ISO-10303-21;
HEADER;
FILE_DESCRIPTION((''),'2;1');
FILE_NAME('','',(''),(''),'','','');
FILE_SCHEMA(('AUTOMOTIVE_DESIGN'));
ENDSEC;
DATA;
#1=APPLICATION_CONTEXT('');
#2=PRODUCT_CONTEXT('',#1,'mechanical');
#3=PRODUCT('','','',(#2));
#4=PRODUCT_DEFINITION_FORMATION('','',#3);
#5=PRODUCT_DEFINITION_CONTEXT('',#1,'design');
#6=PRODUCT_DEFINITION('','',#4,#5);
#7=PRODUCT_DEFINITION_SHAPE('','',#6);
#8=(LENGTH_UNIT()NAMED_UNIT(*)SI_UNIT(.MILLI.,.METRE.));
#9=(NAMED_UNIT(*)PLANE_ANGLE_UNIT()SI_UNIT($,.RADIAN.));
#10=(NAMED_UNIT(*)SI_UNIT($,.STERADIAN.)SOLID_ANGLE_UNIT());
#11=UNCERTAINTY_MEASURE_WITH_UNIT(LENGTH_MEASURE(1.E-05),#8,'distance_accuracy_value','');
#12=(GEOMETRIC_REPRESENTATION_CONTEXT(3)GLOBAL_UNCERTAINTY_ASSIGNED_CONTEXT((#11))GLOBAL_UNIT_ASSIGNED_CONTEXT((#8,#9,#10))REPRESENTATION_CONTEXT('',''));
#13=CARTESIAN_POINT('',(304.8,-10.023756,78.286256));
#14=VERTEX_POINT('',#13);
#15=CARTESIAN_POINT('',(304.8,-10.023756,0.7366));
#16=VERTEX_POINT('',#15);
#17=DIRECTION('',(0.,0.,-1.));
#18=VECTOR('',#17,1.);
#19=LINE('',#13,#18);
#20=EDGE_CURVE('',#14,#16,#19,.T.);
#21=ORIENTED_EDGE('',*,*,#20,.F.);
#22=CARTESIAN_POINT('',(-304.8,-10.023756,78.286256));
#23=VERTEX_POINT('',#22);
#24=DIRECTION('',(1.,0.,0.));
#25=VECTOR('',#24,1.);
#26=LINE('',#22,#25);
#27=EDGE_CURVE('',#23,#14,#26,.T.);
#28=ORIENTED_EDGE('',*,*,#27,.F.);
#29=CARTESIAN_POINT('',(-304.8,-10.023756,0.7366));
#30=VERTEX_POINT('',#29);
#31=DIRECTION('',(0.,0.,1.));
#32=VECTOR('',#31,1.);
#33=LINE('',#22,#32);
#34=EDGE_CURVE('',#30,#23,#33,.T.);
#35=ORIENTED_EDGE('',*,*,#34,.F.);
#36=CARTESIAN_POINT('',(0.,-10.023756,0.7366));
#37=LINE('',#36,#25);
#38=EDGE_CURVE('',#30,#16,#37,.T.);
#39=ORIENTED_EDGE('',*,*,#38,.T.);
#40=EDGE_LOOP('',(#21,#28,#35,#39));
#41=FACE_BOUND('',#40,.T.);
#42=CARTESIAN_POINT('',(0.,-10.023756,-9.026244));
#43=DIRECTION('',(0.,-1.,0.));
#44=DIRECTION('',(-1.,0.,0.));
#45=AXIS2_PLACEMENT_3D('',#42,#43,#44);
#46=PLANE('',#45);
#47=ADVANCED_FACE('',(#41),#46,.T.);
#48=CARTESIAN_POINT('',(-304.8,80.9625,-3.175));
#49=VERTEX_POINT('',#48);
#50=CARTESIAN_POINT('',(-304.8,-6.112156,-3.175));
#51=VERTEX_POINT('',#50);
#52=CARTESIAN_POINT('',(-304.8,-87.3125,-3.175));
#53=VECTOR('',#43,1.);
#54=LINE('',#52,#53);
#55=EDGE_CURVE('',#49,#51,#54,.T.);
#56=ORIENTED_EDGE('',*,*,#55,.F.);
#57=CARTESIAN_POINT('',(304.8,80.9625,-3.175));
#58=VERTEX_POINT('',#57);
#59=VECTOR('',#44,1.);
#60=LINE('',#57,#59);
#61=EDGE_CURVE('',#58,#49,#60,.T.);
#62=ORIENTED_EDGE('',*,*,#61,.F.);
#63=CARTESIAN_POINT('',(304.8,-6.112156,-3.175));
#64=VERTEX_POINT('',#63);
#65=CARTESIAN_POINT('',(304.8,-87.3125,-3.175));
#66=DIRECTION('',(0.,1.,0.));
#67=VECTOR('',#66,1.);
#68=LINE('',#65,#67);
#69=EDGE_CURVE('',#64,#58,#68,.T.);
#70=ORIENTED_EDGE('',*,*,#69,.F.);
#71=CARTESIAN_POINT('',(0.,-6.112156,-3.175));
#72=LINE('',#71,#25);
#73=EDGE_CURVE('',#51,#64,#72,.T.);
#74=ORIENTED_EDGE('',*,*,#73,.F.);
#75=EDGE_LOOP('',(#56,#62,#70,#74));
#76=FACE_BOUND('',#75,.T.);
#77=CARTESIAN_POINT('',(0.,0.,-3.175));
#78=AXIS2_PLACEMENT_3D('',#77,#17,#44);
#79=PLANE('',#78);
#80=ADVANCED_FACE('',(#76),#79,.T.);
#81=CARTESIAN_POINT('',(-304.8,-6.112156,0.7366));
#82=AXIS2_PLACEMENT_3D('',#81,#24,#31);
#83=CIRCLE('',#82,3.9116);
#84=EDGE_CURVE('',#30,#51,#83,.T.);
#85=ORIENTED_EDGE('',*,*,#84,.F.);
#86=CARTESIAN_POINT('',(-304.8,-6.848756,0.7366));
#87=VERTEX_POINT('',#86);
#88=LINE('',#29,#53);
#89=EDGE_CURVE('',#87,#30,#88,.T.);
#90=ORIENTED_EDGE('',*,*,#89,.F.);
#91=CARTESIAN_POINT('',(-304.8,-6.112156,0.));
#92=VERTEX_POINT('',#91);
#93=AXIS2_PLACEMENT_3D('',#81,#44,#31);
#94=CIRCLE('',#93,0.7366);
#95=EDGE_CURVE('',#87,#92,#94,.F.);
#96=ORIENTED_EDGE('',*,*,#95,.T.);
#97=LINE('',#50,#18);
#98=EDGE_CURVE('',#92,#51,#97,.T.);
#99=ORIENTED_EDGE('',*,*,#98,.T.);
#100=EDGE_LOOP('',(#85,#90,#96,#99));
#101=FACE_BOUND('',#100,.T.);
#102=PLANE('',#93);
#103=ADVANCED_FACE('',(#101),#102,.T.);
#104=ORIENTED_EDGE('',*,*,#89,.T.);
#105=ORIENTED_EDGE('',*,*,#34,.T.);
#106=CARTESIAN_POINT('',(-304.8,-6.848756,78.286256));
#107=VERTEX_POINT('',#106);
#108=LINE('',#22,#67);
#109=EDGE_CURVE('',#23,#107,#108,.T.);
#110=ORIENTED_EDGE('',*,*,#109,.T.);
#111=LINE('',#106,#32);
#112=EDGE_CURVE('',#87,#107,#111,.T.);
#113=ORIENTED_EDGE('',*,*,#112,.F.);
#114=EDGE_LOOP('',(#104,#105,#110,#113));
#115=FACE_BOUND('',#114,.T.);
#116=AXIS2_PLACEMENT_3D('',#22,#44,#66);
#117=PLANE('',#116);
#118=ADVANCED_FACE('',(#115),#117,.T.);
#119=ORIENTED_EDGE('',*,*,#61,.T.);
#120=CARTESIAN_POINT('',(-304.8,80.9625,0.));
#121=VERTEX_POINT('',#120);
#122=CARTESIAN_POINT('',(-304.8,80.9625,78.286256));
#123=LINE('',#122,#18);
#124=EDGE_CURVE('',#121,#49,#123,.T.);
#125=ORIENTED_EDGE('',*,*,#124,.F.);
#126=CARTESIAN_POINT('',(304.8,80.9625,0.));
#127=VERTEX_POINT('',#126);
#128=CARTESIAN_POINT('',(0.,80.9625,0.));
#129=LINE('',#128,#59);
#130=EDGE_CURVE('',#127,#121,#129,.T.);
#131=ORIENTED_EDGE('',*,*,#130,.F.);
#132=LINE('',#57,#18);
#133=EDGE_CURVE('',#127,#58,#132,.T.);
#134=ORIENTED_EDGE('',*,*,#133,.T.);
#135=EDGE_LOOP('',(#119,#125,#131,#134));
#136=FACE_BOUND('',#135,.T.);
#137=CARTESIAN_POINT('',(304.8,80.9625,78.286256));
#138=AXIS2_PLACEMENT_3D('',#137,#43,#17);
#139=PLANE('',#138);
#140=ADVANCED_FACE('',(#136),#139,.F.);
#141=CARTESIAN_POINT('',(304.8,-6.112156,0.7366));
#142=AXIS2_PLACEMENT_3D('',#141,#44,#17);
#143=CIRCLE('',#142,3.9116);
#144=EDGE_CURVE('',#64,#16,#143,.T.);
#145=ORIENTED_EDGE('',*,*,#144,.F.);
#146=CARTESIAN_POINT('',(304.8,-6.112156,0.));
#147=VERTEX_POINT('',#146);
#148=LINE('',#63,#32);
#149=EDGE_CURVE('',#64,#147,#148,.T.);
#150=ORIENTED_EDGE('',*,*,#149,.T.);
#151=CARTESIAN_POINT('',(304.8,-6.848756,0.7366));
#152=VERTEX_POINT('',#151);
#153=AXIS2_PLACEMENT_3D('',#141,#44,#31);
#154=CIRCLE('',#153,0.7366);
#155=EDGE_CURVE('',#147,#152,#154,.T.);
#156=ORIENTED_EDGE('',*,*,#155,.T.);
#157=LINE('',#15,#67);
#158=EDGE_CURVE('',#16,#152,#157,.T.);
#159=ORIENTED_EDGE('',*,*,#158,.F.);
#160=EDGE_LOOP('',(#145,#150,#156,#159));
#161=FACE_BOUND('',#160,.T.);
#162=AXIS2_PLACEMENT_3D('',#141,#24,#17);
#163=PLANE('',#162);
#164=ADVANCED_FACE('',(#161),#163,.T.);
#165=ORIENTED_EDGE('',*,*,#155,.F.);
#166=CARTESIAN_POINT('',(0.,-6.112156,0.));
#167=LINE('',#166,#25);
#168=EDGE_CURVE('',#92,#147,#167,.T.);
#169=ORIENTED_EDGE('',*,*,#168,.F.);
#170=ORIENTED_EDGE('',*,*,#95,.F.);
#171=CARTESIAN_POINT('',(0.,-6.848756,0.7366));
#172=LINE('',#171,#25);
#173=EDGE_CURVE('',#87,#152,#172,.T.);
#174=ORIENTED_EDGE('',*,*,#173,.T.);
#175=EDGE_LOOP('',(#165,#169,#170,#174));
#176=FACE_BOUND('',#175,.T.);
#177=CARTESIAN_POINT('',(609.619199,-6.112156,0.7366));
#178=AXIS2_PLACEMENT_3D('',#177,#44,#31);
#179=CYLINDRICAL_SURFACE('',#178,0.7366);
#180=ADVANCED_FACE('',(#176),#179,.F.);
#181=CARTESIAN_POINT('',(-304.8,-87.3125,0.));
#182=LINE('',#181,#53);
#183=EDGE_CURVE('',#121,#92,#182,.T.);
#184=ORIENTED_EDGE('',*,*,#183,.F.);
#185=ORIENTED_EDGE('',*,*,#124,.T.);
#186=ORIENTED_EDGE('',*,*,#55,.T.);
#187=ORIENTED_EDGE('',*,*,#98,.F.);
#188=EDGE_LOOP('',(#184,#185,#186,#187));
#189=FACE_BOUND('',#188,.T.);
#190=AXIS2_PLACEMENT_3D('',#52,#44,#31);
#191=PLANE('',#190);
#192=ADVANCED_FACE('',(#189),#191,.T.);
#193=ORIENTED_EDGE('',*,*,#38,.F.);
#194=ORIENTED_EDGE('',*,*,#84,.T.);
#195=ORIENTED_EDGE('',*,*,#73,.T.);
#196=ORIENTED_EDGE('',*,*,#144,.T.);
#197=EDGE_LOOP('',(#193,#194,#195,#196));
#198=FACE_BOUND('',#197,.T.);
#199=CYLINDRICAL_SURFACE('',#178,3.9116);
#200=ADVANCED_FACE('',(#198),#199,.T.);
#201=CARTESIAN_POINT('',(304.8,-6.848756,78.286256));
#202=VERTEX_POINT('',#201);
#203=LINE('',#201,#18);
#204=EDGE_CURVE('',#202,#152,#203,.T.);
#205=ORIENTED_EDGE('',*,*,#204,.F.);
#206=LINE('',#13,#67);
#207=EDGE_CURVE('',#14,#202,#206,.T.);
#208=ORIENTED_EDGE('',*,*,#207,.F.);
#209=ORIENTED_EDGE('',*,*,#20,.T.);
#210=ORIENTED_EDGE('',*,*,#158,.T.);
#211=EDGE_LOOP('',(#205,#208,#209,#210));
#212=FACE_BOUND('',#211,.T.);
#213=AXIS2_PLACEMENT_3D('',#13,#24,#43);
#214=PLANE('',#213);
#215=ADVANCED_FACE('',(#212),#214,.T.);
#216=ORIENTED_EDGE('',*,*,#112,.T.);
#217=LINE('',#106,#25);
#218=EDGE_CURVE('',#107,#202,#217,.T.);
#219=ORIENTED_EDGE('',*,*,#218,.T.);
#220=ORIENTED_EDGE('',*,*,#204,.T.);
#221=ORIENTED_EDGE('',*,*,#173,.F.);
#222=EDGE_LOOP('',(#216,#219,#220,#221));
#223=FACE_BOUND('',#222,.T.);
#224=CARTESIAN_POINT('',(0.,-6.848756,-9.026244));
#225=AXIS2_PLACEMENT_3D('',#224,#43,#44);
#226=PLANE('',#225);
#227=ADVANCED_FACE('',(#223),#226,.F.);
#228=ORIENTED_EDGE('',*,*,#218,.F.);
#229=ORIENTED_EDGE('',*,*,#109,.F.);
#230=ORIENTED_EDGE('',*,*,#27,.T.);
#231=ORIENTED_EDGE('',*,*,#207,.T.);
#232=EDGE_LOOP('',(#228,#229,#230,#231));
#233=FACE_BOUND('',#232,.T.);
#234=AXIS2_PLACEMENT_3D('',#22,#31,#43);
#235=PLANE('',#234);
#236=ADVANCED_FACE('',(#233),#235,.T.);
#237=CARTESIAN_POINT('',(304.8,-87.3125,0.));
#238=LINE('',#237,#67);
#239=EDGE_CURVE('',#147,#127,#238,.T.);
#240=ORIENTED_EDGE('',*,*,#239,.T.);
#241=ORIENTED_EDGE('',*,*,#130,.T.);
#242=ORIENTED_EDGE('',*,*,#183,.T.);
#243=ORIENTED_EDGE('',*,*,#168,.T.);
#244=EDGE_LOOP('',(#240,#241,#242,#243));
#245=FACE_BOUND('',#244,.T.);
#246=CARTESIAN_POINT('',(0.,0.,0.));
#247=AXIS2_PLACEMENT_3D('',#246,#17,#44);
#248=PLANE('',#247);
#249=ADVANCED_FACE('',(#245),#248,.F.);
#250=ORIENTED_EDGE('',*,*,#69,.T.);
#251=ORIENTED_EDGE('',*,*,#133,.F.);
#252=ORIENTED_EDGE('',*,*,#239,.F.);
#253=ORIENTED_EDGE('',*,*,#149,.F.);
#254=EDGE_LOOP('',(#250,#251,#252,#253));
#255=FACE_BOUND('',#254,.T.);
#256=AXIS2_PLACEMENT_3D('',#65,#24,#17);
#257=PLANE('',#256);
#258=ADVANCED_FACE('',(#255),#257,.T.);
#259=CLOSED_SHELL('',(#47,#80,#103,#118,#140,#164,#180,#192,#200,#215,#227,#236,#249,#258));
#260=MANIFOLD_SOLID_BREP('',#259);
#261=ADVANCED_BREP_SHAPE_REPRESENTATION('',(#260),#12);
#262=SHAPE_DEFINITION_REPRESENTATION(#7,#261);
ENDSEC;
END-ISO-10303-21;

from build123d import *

# Parameters (mm, degrees)
SKETCH8_W              = 609.6
SKETCH8_H              = 174.625
BASE_FLANGE4_DEPTH     = 3.175
SKETCHED_START         = -304.8
SKETCHED_BEND4_DEPTH   = 609.6
SKETCHED_BEND4_2_DEPTH = 609.6
SKETCH24_W             = 609.6
SKETCH24_H             = 6.35
CUT_EXTRUDE1_DEPTH     = 328.356760899


# Read off the part's stored shape, not the designer's step: Sketched Bend4
# Sheet-metal steps are written as plain solids
with BuildPart() as part:
    # Sketch8 → Base-Flange4 (new body)
    with BuildSketch(Plane.XY):
        Rectangle(SKETCH8_W, SKETCH8_H)
    extrude(amount=-BASE_FLANGE4_DEPTH)

    # Sketched Bend4 outline → Sketched Bend4 (cut)
    with BuildSketch(Plane.YZ.offset(SKETCHED_START)):
        with BuildLine():
            ThreePointArc((-6.112156128, -3.175), (-8.604076071, -2.278520157), (-9.953774928, 0))
            Line((-9.953774928, 0), (-87.3125, 0))
            Line((-87.3125, 0), (-87.3125, -3.175))
            Line((-87.3125, -3.175), (-6.112156128, -3.175))
        make_face()
    extrude(amount=SKETCHED_BEND4_DEPTH, mode=Mode.SUBTRACT)

    # Sketched Bend4 2 outline → Sketched Bend4 2 (add)
    with BuildSketch(Plane.YZ.offset(SKETCHED_START)):
        with BuildLine():
            Line((-6.848756128, 78.286256128), (-10.023756128, 78.286256128))
            Line((-10.023756128, 78.286256128), (-10.023756128, 0.7366))
            ThreePointArc((-10.023756128, 0.7366), (-10.006221527, 0.366641581), (-9.953774928, 0))
            Line((-9.953774928, 0), (-6.112156128, 0))
            ThreePointArc((-6.112156128, 0), (-6.633010983, 0.215745145), (-6.848756128, 0.7366))
            Line((-6.848756128, 0.7366), (-6.848756128, 78.286256128))
        make_face()
    extrude(amount=SKETCHED_BEND4_2_DEPTH)

    # Sketch24 → Cut-Extrude1 (cut, through all)
    with BuildSketch(Plane(origin=(0, 0, -3.175), x_dir=(-1, 0, 0), z_dir=(0, 0, -1))):
        with Locations((0, 84.1375)):
            Rectangle(SKETCH24_W, SKETCH24_H)
    extrude(amount=-CUT_EXTRUDE1_DEPTH, mode=Mode.SUBTRACT)


solid = part.part
